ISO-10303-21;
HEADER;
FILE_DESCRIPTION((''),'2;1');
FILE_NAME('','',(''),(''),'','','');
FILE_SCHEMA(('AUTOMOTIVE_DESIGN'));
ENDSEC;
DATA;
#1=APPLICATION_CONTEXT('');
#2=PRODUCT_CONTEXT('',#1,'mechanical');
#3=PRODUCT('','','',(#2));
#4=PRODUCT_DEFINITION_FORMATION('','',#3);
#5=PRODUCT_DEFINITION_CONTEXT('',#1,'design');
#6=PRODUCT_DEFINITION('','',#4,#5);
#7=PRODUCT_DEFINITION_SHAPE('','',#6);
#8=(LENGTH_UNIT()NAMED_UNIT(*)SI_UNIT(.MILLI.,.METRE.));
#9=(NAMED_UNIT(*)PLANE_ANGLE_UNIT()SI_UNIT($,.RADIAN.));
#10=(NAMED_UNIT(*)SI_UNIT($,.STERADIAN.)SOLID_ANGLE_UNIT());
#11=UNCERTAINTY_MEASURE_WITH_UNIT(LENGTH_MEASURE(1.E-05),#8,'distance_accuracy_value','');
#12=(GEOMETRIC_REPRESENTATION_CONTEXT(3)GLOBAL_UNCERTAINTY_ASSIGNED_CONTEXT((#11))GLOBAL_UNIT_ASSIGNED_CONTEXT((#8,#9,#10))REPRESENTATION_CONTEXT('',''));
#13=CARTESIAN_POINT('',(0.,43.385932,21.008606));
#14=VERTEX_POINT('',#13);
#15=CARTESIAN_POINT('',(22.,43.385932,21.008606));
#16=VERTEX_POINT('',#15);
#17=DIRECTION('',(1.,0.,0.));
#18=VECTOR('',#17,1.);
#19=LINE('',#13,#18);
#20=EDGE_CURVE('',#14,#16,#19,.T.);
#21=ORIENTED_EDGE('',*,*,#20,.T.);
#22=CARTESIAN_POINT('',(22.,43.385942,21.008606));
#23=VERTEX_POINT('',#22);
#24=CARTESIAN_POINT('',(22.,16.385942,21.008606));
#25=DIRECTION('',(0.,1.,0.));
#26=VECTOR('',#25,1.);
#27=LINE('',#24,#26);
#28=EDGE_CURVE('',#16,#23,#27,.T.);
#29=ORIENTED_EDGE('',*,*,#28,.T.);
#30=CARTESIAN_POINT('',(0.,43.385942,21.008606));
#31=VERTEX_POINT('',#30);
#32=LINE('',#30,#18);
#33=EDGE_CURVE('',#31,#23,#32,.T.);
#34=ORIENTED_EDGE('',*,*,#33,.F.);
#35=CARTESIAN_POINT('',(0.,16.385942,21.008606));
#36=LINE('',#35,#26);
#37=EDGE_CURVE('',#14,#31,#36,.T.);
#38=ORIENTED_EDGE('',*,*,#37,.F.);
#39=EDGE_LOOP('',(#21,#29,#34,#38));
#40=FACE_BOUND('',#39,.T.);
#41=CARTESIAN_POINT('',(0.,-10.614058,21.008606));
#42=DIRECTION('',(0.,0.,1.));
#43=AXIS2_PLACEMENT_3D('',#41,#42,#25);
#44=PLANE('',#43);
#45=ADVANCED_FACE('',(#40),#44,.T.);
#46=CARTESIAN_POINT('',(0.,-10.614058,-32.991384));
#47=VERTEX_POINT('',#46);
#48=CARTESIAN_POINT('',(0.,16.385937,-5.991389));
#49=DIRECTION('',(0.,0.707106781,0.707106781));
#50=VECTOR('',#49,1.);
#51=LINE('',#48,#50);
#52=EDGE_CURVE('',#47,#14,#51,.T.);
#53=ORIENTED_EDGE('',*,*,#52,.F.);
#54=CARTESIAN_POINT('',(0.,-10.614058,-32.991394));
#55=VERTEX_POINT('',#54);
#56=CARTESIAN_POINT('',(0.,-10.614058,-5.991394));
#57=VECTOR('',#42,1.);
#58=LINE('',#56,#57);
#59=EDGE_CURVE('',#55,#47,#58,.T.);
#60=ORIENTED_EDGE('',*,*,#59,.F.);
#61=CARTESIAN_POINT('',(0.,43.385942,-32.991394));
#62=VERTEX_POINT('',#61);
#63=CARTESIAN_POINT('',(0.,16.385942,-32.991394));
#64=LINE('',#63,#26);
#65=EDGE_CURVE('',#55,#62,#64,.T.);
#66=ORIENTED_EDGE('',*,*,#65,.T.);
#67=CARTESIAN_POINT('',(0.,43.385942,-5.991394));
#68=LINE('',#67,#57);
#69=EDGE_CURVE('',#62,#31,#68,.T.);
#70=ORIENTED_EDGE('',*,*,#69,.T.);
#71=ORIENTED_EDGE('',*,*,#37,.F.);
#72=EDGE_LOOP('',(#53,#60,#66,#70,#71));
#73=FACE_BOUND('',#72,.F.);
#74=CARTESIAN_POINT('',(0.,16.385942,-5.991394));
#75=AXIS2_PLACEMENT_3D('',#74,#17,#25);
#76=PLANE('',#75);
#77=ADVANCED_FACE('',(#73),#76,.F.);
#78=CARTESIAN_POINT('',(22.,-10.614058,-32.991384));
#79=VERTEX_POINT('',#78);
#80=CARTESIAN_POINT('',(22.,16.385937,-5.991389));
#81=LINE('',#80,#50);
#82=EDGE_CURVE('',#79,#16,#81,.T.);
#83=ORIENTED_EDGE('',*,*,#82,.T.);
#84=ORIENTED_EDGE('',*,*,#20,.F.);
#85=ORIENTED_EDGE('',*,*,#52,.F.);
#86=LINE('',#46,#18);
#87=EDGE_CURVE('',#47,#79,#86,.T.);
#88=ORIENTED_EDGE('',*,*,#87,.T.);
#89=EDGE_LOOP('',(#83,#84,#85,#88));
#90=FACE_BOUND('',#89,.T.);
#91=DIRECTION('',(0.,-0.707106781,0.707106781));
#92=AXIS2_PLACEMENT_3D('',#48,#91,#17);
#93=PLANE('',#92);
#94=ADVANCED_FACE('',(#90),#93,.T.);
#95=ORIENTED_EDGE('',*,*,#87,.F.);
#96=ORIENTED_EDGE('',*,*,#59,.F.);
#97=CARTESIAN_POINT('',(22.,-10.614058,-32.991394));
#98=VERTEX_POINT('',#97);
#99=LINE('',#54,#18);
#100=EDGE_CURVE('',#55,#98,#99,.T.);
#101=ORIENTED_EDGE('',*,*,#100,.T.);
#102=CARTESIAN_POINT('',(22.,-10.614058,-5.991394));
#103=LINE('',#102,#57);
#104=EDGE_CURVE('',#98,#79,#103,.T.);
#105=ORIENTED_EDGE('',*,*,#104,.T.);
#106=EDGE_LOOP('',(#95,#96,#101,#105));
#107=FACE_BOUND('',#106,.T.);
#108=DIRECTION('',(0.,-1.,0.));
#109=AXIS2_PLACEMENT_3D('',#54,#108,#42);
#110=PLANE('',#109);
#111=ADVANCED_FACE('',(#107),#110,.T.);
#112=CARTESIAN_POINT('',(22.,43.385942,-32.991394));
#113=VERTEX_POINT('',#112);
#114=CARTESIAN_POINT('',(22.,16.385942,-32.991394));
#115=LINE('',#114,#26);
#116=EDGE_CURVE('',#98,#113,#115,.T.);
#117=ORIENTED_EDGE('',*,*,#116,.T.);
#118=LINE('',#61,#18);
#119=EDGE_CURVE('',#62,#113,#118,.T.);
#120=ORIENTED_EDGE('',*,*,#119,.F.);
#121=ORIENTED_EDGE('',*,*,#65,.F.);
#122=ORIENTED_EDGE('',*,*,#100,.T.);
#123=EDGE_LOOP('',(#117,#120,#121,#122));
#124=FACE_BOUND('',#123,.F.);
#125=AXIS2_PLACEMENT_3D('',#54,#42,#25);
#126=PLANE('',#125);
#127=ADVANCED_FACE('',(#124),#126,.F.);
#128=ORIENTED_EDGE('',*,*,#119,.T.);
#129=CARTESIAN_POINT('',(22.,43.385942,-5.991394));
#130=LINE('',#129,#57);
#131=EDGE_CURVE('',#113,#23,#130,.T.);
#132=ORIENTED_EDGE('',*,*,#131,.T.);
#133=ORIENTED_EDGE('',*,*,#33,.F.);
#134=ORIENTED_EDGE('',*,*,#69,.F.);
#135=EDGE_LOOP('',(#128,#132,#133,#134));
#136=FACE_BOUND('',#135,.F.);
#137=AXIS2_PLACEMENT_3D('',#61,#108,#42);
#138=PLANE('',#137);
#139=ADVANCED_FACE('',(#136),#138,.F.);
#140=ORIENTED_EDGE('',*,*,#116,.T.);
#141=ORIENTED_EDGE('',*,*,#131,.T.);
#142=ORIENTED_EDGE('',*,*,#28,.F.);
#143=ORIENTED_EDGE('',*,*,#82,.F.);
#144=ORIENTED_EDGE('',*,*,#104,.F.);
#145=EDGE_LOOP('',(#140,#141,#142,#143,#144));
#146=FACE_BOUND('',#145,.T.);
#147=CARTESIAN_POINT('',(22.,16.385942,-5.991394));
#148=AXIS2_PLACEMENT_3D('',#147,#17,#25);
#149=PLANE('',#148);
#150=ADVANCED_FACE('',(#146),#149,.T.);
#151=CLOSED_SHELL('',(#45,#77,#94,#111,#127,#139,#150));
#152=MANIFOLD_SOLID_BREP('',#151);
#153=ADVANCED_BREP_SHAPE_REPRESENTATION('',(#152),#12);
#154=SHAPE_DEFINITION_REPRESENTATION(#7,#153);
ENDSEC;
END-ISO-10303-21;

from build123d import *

# Parameters (mm, degrees)
F0_W     = 54
F0_H     = 54
F1_DEPTH = 22
F2_SIZE  = 53.99999


# Not quite as in the source:
# - a fillet or chamfer is up to 0.001 mm smaller than in the source, because OpenCascade refuses the exact size


with BuildPart() as f1:
    # F0 (on Right) → F1 (new body)
    with BuildSketch(Plane.YZ):
        with Locations((16.3859415352, -5.9913944006)):
            Rectangle(F0_W, F0_H)
    extrude(amount=F1_DEPTH)

    # F2 (size 54 in the source; OpenCascade refuses exactly that, so slightly less here)
    f2_edges = [f1.edges().sort_by_distance(p)[0] for p in [
        (11, -10.614058, 21.008606),
    ]]
    chamfer(f2_edges, length=F2_SIZE)


solid = f1.part
